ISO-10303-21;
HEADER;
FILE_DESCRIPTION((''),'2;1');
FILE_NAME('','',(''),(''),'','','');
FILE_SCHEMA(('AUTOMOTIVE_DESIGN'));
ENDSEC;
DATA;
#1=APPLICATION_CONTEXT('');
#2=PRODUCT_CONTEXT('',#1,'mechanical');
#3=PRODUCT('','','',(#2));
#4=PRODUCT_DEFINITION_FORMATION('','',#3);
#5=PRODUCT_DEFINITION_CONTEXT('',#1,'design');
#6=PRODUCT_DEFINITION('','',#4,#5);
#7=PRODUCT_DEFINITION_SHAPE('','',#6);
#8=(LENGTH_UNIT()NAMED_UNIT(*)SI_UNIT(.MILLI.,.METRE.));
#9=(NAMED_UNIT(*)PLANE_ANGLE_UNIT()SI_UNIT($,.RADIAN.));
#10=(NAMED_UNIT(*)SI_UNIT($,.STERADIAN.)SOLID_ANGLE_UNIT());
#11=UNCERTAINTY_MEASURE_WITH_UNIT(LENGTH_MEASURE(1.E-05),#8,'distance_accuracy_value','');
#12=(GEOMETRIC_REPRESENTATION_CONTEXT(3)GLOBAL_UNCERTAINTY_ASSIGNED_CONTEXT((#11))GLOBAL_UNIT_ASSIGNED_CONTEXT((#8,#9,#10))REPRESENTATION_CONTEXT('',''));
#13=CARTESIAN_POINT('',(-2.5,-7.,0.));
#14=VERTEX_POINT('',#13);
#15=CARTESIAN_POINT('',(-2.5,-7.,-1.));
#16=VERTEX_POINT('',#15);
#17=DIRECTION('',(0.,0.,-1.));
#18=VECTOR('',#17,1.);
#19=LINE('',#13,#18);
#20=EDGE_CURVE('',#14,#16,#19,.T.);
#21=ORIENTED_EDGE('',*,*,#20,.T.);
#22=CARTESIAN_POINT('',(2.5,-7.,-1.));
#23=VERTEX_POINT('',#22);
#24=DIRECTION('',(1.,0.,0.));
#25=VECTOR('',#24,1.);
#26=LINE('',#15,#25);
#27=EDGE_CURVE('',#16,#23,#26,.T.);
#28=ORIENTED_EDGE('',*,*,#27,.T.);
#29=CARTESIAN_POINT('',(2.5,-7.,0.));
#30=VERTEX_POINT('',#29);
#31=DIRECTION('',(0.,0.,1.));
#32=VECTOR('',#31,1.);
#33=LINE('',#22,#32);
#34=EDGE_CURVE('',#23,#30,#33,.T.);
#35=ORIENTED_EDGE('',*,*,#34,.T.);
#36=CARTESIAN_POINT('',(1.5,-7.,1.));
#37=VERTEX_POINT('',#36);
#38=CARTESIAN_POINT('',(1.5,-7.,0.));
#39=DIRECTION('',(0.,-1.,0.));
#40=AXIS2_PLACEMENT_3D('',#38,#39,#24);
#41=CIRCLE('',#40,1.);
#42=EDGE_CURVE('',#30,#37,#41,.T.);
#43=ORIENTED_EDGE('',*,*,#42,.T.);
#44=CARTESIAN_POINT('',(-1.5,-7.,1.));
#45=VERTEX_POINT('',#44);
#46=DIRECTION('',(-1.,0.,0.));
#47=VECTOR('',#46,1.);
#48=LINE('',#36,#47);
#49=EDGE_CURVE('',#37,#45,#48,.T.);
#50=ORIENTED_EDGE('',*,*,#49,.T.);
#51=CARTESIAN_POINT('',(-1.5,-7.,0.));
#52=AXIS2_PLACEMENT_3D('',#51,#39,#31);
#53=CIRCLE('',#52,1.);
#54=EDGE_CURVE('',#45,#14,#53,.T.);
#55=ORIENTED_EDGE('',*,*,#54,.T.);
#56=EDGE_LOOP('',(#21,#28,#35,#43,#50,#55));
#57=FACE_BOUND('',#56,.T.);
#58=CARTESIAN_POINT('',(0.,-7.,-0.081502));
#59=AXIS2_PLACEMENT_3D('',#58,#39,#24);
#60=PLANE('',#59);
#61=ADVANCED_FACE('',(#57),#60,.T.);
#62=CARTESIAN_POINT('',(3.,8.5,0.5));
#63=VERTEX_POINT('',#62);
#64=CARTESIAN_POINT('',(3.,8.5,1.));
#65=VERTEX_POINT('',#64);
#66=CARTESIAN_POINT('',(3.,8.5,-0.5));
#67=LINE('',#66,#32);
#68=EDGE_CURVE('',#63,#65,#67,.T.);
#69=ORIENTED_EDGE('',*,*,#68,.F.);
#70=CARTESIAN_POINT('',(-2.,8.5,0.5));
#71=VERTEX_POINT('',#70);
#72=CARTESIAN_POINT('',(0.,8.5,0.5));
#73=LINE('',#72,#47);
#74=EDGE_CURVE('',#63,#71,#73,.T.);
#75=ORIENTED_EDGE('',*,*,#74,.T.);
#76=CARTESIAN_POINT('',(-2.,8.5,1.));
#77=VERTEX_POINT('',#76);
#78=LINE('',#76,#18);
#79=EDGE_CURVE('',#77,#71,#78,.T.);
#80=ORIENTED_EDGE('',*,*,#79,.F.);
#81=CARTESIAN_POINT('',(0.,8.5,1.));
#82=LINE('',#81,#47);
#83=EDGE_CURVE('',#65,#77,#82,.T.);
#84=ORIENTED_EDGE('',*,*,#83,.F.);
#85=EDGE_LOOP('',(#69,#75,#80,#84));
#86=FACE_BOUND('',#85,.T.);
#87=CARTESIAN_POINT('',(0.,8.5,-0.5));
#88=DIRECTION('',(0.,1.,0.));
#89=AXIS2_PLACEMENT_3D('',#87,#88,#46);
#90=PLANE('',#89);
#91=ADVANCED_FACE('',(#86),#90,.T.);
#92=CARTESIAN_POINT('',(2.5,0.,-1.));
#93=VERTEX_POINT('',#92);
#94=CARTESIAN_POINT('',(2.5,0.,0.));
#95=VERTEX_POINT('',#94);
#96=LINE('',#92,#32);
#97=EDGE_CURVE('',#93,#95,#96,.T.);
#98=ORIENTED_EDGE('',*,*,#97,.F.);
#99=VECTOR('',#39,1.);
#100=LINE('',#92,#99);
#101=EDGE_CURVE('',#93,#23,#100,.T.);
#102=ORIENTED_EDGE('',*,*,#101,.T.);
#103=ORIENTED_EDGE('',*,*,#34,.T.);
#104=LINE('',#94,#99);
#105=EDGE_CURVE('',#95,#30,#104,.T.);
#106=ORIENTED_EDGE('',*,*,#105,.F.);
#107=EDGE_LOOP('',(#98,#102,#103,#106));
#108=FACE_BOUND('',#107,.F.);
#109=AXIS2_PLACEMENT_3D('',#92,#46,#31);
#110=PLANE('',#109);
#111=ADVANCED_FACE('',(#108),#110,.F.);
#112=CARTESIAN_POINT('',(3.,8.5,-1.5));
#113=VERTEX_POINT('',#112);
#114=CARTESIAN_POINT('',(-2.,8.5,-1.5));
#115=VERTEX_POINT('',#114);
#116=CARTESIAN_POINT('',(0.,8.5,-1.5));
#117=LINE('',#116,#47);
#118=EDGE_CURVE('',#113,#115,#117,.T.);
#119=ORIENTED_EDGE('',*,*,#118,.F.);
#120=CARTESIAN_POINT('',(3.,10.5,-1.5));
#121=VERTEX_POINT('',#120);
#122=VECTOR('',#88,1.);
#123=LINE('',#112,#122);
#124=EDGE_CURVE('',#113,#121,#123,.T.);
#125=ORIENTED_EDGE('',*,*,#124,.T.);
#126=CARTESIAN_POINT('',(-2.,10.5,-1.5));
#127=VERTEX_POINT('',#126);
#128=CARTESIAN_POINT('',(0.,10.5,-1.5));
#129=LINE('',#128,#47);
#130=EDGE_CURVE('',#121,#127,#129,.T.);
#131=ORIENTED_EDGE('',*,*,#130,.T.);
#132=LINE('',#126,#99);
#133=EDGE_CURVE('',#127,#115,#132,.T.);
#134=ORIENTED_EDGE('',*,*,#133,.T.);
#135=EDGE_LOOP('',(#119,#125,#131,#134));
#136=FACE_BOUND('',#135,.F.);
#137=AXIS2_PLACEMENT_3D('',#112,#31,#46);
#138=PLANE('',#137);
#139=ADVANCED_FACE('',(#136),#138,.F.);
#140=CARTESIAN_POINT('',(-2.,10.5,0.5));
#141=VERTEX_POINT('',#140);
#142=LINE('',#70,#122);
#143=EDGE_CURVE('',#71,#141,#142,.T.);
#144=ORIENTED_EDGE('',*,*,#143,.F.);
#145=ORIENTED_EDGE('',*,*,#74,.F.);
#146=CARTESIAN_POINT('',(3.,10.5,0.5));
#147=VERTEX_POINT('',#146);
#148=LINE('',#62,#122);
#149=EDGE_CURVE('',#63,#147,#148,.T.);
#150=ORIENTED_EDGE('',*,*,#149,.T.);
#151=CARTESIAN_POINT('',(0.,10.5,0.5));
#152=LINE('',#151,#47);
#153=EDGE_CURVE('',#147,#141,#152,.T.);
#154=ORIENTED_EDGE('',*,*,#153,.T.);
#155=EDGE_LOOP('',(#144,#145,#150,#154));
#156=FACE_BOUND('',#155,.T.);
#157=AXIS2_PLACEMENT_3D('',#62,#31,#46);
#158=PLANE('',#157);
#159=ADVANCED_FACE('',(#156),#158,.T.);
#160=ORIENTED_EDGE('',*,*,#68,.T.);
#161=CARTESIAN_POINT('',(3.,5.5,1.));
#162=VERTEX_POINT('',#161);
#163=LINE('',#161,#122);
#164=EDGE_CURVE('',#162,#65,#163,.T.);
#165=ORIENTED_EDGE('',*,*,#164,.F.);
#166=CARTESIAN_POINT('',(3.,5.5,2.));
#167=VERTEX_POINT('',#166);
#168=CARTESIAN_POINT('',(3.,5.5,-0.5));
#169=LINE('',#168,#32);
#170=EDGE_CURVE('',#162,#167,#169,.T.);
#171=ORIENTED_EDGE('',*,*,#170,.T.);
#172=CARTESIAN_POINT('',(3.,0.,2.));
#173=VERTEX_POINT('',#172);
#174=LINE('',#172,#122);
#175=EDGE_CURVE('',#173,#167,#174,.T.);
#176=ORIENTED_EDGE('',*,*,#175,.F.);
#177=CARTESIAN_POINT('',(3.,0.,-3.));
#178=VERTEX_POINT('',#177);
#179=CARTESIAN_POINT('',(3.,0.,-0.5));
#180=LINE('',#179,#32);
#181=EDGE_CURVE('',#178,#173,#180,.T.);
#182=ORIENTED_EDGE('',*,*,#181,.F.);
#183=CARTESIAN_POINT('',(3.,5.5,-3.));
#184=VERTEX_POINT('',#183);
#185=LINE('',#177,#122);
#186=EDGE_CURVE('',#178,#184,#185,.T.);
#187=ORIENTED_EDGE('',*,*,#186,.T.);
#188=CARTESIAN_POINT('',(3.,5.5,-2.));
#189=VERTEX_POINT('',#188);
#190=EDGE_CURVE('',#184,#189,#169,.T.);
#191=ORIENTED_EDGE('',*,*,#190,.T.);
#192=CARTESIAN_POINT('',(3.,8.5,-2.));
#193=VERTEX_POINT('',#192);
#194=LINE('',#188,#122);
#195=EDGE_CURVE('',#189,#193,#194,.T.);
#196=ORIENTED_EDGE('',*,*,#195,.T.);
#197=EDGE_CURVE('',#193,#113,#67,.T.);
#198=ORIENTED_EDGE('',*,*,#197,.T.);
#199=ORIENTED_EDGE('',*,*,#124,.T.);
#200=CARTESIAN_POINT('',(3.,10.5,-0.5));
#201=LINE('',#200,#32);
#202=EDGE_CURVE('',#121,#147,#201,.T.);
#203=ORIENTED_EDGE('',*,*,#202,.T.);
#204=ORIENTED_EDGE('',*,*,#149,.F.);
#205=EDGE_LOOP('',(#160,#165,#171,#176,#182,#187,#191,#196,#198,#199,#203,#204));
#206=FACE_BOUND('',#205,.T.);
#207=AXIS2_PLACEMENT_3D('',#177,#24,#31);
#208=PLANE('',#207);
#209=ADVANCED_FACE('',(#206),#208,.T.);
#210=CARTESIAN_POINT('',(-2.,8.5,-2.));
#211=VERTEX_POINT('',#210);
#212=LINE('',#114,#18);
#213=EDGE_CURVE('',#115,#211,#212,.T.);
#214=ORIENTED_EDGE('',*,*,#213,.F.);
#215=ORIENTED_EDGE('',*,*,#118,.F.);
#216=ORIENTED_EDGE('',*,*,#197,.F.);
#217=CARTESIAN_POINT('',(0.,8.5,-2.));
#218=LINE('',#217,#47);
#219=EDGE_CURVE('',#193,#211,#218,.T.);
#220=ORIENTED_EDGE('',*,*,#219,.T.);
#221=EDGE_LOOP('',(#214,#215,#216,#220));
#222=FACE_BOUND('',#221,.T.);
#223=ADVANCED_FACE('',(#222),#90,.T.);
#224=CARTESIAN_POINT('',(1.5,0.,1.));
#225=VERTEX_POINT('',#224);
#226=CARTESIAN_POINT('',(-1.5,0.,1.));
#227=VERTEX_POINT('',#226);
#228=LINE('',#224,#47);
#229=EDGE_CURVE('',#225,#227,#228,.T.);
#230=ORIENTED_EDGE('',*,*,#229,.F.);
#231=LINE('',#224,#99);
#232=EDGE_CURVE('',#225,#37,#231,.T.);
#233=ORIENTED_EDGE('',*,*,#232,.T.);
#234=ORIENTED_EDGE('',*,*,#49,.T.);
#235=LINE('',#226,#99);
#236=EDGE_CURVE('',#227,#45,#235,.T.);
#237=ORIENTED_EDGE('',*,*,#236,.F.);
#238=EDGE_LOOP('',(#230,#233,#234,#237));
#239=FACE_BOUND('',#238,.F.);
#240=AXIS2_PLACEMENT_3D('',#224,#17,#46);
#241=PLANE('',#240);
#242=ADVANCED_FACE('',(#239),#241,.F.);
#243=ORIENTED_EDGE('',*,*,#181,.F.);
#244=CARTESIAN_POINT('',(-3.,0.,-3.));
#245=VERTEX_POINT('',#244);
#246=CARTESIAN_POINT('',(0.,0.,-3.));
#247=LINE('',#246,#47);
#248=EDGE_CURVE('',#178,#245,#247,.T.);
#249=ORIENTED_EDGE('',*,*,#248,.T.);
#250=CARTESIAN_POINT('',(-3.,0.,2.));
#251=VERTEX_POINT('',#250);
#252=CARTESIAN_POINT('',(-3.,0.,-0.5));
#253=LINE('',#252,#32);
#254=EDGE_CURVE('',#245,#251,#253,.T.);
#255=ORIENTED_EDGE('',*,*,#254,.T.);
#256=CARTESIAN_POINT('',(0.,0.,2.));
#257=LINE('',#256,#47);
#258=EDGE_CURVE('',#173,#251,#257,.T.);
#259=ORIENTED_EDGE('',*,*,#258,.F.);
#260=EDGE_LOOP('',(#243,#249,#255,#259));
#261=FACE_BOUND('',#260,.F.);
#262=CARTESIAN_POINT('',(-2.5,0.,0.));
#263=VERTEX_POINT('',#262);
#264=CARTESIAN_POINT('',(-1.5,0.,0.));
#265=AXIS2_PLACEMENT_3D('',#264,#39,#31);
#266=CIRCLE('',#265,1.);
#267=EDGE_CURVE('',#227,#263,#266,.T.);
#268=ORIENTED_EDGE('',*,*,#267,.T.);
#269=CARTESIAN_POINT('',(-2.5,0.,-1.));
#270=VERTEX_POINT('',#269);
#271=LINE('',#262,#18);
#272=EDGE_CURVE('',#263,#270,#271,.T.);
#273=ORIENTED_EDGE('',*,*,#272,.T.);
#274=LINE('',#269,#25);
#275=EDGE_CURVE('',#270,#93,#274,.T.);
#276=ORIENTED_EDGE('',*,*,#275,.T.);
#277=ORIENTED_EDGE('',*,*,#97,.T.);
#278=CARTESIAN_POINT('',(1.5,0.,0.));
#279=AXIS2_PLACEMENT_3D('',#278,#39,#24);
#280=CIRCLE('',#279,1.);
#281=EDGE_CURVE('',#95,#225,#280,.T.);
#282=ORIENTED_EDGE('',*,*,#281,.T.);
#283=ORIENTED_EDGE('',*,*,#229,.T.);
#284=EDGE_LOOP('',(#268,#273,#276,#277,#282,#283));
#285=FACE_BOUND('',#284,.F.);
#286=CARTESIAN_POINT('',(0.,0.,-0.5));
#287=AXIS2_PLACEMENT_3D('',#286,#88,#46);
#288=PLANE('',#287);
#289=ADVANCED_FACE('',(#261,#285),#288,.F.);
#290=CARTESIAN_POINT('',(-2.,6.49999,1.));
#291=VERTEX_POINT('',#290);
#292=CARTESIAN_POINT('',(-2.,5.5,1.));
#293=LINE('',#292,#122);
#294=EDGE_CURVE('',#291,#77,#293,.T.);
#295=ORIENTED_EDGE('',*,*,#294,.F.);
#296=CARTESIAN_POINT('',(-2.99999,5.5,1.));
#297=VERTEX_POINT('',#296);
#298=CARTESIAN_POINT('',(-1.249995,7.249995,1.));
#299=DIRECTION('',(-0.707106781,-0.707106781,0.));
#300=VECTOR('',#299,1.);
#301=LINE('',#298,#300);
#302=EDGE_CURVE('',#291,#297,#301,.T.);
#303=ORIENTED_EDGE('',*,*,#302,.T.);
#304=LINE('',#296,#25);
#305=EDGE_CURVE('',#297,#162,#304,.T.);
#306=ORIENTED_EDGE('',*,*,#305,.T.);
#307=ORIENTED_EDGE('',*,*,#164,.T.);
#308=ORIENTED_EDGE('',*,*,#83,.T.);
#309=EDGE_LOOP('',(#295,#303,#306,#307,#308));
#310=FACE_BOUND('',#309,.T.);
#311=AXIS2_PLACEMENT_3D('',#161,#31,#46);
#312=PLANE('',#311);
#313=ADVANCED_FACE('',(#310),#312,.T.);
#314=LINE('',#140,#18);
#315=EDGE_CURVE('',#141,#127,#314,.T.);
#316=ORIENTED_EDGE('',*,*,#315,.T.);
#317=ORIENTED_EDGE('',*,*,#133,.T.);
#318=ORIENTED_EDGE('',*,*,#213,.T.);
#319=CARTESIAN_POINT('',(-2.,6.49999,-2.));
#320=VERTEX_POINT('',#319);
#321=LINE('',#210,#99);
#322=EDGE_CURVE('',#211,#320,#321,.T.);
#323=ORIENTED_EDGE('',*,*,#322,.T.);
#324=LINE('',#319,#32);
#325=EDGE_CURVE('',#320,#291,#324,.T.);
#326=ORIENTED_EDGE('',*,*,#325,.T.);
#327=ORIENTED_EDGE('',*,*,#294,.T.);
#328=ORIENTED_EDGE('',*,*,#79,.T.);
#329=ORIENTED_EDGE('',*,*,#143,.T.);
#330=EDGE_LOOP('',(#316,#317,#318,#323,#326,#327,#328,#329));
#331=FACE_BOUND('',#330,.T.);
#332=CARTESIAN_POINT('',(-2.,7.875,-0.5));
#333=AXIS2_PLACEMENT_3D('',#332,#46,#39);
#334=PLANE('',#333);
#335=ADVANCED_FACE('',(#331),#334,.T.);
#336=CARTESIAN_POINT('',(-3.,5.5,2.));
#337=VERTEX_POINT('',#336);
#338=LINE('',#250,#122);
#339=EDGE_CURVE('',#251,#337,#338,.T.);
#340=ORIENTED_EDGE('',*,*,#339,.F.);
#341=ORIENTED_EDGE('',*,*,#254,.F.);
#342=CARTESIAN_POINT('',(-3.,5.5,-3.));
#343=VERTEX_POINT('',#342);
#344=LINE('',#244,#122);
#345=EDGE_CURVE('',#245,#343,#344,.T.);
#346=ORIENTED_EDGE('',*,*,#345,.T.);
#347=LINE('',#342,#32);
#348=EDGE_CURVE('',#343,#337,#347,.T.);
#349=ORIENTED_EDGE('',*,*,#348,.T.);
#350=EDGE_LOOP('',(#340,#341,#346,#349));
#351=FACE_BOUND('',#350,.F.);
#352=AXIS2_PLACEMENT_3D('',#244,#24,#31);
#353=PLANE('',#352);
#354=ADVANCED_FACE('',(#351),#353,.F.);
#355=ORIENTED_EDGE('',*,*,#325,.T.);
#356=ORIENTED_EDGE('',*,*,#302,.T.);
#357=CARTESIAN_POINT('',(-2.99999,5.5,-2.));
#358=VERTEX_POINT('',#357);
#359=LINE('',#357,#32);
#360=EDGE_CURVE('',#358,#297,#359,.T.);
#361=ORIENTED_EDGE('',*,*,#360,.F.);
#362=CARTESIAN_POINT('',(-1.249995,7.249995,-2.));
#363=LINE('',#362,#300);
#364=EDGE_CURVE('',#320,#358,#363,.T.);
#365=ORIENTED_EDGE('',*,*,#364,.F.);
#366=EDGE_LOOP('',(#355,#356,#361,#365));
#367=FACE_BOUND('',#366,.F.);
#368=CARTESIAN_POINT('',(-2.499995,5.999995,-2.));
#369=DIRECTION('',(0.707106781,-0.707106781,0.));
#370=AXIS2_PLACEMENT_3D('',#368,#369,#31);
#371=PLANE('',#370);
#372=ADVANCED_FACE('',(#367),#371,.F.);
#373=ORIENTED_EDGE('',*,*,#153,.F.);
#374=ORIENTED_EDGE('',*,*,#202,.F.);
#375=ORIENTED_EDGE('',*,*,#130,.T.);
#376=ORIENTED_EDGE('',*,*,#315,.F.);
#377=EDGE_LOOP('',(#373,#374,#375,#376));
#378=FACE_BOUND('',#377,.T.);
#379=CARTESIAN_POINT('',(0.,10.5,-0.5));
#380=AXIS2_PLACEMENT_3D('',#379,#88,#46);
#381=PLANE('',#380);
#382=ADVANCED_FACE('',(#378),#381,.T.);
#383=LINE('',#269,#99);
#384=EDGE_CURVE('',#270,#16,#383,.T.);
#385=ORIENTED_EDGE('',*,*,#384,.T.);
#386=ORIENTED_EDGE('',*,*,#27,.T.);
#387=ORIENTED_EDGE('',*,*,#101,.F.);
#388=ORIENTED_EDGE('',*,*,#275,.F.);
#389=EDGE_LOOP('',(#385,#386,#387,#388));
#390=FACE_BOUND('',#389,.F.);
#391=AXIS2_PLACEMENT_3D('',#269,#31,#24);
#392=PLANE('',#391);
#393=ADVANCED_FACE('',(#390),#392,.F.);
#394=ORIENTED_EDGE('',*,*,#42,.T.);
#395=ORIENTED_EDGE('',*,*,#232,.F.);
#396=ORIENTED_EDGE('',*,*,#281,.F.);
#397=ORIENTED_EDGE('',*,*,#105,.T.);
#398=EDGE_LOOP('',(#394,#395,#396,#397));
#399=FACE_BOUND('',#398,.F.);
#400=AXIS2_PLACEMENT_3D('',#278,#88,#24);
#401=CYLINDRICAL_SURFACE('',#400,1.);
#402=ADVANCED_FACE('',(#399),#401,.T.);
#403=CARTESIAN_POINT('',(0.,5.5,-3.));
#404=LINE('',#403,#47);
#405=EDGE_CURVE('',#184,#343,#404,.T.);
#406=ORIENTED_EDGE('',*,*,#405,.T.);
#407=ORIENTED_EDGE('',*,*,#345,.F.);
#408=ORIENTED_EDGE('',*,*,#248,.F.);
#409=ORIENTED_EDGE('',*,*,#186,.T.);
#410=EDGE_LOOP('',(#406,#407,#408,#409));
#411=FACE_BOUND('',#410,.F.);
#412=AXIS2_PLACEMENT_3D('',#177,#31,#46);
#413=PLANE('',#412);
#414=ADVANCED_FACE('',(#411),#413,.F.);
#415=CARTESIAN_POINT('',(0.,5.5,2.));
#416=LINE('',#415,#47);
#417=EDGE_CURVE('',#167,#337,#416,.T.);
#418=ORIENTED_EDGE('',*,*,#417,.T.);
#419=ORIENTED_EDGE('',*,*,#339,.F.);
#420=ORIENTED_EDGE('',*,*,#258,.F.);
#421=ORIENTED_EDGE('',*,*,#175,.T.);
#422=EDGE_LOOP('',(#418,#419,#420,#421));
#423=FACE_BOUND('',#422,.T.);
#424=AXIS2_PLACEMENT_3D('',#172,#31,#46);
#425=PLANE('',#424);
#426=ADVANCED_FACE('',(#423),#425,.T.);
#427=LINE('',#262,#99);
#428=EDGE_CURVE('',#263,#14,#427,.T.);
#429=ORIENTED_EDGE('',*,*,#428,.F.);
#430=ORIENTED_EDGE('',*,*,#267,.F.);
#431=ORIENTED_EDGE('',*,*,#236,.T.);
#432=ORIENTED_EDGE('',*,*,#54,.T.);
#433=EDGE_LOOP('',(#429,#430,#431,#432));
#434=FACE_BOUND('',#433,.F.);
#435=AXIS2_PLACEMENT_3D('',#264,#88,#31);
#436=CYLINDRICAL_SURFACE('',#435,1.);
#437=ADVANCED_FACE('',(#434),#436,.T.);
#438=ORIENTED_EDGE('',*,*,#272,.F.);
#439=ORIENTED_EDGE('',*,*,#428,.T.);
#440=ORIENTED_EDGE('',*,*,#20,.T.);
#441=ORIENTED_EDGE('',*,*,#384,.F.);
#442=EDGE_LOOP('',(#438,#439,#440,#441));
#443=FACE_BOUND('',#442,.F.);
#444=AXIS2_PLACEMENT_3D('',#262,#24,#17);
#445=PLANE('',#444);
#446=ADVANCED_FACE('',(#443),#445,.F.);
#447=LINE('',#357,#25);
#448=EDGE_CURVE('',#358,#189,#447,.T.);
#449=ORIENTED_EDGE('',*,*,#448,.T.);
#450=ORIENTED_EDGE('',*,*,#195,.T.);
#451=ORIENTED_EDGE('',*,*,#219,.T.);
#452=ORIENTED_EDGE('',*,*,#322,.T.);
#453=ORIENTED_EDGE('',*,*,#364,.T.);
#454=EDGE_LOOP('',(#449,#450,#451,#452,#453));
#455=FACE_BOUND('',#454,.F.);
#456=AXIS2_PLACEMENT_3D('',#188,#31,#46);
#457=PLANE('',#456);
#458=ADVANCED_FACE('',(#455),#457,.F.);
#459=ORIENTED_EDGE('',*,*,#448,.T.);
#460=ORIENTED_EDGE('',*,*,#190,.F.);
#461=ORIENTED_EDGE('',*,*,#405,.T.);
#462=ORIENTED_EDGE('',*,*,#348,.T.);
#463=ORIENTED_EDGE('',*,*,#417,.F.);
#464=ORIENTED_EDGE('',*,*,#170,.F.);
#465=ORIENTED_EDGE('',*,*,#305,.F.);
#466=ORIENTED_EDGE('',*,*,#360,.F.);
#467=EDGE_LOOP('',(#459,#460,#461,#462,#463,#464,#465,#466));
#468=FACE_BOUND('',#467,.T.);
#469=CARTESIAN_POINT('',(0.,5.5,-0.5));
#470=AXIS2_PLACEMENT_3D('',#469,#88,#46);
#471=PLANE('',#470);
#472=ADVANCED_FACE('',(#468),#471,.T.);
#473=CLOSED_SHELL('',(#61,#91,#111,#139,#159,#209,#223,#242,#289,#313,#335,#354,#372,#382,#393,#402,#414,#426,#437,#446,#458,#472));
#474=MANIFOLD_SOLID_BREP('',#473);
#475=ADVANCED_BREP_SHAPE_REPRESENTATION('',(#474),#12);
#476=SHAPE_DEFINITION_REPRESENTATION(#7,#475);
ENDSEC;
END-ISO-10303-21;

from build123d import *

# Parameters (mm, degrees)
F1_DEPTH = 7
F2_W     = 6
F2_H     = 5
F3_DEPTH = 5.5
F4_W     = 6
F4_H     = 3
F5_DEPTH = 3
F6_W     = 6
F6_H     = 2
F7_DEPTH = 2
F9_DEPTH = 1
F10_SIZE = 0.99999


# Not quite as in the source:
# - a fillet or chamfer is up to 0.001 mm smaller than in the source, because OpenCascade refuses the exact size


with BuildPart() as f1:
    # F0 (on Front) → F1 (new body)
    with BuildSketch(Plane.XZ):
        with BuildLine():
            Line((-2.5, -1), (2.5, -1))
            Line((2.5, -1), (2.5, 0))
            ThreePointArc((2.5, 0), (2.2071067812, 0.7071067812), (1.5, 1))
            Line((1.5, 1), (-1.5, 1))
            ThreePointArc((-1.5, 1), (-2.2071067812, 0.7071067812), (-2.5, 0))
            Line((-2.5, 0), (-2.5, -1))
        make_face()
    extrude(amount=F1_DEPTH)

    # F2 (on face) → F3 (join)
    with BuildSketch(Plane(origin=(0, 0, 0), x_dir=(-1, 0, 0), z_dir=(0, 1, 0))):
        with Locations((0, -0.5)):
            Rectangle(F2_W, F2_H)
        with BuildLine():
            ThreePointArc((1.5, 1), (2.2071067812, 0.7071067812), (2.5, 0))
            Line((2.5, 0), (2.5, -1))
            Line((2.5, -1), (-2.5, -1))
            Line((-2.5, -1), (-2.5, 0))
            ThreePointArc((-2.5, 0), (-2.2071067812, 0.7071067812), (-1.5, 1))
            Line((-1.5, 1), (1.5, 1))
        make_face(mode=Mode.SUBTRACT)
        with BuildLine():
            Line((2.5, -1), (2.5, 0))
            ThreePointArc((2.5, 0), (2.2071067812, 0.7071067812), (1.5, 1))
            Line((1.5, 1), (-1.5, 1))
            ThreePointArc((-1.5, 1), (-2.2071067812, 0.7071067812), (-2.5, 0))
            Line((-2.5, 0), (-2.5, -1))
            Line((-2.5, -1), (2.5, -1))
        make_face()
    extrude(amount=F3_DEPTH)

    # F4 (on face) → F5 (join)
    with BuildSketch(Plane(origin=(0, 5.5, 0), x_dir=(-1, 0, 0), z_dir=(0, 1, 0))):
        with Locations((0, -0.5)):
            Rectangle(F4_W, F4_H)
    extrude(amount=F5_DEPTH)

    # F6 (on face) → F7 (join)
    with BuildSketch(Plane(origin=(0, 8.5, 0), x_dir=(-1, 0, 0), z_dir=(0, 1, 0))):
        with Locations((0, -0.5)):
            Rectangle(F6_W, F6_H)
    extrude(amount=F7_DEPTH)

    # F8 (on face) → F9 (cut)
    with BuildSketch(Plane(origin=(-3, 0, 0), x_dir=(0, -1, 0), z_dir=(-1, 0, 0))):
        Polygon((-5.5, -2), (-5.5, 1), (-8.5, 1), (-8.5, 0.5), (-10.5, 0.5), (-10.5, -1.5), (-8.5, -1.5), (-8.5, -2), align=None)
    extrude(amount=-F9_DEPTH, mode=Mode.SUBTRACT)

    # F10 (size 1 in the source; OpenCascade refuses exactly that, so slightly less here)
    f10_edges = [f1.edges().sort_by_distance(p)[0] for p in [
        (-2, 5.5, -0.5),
    ]]
    chamfer(f10_edges, length=F10_SIZE)


solid = f1.part
